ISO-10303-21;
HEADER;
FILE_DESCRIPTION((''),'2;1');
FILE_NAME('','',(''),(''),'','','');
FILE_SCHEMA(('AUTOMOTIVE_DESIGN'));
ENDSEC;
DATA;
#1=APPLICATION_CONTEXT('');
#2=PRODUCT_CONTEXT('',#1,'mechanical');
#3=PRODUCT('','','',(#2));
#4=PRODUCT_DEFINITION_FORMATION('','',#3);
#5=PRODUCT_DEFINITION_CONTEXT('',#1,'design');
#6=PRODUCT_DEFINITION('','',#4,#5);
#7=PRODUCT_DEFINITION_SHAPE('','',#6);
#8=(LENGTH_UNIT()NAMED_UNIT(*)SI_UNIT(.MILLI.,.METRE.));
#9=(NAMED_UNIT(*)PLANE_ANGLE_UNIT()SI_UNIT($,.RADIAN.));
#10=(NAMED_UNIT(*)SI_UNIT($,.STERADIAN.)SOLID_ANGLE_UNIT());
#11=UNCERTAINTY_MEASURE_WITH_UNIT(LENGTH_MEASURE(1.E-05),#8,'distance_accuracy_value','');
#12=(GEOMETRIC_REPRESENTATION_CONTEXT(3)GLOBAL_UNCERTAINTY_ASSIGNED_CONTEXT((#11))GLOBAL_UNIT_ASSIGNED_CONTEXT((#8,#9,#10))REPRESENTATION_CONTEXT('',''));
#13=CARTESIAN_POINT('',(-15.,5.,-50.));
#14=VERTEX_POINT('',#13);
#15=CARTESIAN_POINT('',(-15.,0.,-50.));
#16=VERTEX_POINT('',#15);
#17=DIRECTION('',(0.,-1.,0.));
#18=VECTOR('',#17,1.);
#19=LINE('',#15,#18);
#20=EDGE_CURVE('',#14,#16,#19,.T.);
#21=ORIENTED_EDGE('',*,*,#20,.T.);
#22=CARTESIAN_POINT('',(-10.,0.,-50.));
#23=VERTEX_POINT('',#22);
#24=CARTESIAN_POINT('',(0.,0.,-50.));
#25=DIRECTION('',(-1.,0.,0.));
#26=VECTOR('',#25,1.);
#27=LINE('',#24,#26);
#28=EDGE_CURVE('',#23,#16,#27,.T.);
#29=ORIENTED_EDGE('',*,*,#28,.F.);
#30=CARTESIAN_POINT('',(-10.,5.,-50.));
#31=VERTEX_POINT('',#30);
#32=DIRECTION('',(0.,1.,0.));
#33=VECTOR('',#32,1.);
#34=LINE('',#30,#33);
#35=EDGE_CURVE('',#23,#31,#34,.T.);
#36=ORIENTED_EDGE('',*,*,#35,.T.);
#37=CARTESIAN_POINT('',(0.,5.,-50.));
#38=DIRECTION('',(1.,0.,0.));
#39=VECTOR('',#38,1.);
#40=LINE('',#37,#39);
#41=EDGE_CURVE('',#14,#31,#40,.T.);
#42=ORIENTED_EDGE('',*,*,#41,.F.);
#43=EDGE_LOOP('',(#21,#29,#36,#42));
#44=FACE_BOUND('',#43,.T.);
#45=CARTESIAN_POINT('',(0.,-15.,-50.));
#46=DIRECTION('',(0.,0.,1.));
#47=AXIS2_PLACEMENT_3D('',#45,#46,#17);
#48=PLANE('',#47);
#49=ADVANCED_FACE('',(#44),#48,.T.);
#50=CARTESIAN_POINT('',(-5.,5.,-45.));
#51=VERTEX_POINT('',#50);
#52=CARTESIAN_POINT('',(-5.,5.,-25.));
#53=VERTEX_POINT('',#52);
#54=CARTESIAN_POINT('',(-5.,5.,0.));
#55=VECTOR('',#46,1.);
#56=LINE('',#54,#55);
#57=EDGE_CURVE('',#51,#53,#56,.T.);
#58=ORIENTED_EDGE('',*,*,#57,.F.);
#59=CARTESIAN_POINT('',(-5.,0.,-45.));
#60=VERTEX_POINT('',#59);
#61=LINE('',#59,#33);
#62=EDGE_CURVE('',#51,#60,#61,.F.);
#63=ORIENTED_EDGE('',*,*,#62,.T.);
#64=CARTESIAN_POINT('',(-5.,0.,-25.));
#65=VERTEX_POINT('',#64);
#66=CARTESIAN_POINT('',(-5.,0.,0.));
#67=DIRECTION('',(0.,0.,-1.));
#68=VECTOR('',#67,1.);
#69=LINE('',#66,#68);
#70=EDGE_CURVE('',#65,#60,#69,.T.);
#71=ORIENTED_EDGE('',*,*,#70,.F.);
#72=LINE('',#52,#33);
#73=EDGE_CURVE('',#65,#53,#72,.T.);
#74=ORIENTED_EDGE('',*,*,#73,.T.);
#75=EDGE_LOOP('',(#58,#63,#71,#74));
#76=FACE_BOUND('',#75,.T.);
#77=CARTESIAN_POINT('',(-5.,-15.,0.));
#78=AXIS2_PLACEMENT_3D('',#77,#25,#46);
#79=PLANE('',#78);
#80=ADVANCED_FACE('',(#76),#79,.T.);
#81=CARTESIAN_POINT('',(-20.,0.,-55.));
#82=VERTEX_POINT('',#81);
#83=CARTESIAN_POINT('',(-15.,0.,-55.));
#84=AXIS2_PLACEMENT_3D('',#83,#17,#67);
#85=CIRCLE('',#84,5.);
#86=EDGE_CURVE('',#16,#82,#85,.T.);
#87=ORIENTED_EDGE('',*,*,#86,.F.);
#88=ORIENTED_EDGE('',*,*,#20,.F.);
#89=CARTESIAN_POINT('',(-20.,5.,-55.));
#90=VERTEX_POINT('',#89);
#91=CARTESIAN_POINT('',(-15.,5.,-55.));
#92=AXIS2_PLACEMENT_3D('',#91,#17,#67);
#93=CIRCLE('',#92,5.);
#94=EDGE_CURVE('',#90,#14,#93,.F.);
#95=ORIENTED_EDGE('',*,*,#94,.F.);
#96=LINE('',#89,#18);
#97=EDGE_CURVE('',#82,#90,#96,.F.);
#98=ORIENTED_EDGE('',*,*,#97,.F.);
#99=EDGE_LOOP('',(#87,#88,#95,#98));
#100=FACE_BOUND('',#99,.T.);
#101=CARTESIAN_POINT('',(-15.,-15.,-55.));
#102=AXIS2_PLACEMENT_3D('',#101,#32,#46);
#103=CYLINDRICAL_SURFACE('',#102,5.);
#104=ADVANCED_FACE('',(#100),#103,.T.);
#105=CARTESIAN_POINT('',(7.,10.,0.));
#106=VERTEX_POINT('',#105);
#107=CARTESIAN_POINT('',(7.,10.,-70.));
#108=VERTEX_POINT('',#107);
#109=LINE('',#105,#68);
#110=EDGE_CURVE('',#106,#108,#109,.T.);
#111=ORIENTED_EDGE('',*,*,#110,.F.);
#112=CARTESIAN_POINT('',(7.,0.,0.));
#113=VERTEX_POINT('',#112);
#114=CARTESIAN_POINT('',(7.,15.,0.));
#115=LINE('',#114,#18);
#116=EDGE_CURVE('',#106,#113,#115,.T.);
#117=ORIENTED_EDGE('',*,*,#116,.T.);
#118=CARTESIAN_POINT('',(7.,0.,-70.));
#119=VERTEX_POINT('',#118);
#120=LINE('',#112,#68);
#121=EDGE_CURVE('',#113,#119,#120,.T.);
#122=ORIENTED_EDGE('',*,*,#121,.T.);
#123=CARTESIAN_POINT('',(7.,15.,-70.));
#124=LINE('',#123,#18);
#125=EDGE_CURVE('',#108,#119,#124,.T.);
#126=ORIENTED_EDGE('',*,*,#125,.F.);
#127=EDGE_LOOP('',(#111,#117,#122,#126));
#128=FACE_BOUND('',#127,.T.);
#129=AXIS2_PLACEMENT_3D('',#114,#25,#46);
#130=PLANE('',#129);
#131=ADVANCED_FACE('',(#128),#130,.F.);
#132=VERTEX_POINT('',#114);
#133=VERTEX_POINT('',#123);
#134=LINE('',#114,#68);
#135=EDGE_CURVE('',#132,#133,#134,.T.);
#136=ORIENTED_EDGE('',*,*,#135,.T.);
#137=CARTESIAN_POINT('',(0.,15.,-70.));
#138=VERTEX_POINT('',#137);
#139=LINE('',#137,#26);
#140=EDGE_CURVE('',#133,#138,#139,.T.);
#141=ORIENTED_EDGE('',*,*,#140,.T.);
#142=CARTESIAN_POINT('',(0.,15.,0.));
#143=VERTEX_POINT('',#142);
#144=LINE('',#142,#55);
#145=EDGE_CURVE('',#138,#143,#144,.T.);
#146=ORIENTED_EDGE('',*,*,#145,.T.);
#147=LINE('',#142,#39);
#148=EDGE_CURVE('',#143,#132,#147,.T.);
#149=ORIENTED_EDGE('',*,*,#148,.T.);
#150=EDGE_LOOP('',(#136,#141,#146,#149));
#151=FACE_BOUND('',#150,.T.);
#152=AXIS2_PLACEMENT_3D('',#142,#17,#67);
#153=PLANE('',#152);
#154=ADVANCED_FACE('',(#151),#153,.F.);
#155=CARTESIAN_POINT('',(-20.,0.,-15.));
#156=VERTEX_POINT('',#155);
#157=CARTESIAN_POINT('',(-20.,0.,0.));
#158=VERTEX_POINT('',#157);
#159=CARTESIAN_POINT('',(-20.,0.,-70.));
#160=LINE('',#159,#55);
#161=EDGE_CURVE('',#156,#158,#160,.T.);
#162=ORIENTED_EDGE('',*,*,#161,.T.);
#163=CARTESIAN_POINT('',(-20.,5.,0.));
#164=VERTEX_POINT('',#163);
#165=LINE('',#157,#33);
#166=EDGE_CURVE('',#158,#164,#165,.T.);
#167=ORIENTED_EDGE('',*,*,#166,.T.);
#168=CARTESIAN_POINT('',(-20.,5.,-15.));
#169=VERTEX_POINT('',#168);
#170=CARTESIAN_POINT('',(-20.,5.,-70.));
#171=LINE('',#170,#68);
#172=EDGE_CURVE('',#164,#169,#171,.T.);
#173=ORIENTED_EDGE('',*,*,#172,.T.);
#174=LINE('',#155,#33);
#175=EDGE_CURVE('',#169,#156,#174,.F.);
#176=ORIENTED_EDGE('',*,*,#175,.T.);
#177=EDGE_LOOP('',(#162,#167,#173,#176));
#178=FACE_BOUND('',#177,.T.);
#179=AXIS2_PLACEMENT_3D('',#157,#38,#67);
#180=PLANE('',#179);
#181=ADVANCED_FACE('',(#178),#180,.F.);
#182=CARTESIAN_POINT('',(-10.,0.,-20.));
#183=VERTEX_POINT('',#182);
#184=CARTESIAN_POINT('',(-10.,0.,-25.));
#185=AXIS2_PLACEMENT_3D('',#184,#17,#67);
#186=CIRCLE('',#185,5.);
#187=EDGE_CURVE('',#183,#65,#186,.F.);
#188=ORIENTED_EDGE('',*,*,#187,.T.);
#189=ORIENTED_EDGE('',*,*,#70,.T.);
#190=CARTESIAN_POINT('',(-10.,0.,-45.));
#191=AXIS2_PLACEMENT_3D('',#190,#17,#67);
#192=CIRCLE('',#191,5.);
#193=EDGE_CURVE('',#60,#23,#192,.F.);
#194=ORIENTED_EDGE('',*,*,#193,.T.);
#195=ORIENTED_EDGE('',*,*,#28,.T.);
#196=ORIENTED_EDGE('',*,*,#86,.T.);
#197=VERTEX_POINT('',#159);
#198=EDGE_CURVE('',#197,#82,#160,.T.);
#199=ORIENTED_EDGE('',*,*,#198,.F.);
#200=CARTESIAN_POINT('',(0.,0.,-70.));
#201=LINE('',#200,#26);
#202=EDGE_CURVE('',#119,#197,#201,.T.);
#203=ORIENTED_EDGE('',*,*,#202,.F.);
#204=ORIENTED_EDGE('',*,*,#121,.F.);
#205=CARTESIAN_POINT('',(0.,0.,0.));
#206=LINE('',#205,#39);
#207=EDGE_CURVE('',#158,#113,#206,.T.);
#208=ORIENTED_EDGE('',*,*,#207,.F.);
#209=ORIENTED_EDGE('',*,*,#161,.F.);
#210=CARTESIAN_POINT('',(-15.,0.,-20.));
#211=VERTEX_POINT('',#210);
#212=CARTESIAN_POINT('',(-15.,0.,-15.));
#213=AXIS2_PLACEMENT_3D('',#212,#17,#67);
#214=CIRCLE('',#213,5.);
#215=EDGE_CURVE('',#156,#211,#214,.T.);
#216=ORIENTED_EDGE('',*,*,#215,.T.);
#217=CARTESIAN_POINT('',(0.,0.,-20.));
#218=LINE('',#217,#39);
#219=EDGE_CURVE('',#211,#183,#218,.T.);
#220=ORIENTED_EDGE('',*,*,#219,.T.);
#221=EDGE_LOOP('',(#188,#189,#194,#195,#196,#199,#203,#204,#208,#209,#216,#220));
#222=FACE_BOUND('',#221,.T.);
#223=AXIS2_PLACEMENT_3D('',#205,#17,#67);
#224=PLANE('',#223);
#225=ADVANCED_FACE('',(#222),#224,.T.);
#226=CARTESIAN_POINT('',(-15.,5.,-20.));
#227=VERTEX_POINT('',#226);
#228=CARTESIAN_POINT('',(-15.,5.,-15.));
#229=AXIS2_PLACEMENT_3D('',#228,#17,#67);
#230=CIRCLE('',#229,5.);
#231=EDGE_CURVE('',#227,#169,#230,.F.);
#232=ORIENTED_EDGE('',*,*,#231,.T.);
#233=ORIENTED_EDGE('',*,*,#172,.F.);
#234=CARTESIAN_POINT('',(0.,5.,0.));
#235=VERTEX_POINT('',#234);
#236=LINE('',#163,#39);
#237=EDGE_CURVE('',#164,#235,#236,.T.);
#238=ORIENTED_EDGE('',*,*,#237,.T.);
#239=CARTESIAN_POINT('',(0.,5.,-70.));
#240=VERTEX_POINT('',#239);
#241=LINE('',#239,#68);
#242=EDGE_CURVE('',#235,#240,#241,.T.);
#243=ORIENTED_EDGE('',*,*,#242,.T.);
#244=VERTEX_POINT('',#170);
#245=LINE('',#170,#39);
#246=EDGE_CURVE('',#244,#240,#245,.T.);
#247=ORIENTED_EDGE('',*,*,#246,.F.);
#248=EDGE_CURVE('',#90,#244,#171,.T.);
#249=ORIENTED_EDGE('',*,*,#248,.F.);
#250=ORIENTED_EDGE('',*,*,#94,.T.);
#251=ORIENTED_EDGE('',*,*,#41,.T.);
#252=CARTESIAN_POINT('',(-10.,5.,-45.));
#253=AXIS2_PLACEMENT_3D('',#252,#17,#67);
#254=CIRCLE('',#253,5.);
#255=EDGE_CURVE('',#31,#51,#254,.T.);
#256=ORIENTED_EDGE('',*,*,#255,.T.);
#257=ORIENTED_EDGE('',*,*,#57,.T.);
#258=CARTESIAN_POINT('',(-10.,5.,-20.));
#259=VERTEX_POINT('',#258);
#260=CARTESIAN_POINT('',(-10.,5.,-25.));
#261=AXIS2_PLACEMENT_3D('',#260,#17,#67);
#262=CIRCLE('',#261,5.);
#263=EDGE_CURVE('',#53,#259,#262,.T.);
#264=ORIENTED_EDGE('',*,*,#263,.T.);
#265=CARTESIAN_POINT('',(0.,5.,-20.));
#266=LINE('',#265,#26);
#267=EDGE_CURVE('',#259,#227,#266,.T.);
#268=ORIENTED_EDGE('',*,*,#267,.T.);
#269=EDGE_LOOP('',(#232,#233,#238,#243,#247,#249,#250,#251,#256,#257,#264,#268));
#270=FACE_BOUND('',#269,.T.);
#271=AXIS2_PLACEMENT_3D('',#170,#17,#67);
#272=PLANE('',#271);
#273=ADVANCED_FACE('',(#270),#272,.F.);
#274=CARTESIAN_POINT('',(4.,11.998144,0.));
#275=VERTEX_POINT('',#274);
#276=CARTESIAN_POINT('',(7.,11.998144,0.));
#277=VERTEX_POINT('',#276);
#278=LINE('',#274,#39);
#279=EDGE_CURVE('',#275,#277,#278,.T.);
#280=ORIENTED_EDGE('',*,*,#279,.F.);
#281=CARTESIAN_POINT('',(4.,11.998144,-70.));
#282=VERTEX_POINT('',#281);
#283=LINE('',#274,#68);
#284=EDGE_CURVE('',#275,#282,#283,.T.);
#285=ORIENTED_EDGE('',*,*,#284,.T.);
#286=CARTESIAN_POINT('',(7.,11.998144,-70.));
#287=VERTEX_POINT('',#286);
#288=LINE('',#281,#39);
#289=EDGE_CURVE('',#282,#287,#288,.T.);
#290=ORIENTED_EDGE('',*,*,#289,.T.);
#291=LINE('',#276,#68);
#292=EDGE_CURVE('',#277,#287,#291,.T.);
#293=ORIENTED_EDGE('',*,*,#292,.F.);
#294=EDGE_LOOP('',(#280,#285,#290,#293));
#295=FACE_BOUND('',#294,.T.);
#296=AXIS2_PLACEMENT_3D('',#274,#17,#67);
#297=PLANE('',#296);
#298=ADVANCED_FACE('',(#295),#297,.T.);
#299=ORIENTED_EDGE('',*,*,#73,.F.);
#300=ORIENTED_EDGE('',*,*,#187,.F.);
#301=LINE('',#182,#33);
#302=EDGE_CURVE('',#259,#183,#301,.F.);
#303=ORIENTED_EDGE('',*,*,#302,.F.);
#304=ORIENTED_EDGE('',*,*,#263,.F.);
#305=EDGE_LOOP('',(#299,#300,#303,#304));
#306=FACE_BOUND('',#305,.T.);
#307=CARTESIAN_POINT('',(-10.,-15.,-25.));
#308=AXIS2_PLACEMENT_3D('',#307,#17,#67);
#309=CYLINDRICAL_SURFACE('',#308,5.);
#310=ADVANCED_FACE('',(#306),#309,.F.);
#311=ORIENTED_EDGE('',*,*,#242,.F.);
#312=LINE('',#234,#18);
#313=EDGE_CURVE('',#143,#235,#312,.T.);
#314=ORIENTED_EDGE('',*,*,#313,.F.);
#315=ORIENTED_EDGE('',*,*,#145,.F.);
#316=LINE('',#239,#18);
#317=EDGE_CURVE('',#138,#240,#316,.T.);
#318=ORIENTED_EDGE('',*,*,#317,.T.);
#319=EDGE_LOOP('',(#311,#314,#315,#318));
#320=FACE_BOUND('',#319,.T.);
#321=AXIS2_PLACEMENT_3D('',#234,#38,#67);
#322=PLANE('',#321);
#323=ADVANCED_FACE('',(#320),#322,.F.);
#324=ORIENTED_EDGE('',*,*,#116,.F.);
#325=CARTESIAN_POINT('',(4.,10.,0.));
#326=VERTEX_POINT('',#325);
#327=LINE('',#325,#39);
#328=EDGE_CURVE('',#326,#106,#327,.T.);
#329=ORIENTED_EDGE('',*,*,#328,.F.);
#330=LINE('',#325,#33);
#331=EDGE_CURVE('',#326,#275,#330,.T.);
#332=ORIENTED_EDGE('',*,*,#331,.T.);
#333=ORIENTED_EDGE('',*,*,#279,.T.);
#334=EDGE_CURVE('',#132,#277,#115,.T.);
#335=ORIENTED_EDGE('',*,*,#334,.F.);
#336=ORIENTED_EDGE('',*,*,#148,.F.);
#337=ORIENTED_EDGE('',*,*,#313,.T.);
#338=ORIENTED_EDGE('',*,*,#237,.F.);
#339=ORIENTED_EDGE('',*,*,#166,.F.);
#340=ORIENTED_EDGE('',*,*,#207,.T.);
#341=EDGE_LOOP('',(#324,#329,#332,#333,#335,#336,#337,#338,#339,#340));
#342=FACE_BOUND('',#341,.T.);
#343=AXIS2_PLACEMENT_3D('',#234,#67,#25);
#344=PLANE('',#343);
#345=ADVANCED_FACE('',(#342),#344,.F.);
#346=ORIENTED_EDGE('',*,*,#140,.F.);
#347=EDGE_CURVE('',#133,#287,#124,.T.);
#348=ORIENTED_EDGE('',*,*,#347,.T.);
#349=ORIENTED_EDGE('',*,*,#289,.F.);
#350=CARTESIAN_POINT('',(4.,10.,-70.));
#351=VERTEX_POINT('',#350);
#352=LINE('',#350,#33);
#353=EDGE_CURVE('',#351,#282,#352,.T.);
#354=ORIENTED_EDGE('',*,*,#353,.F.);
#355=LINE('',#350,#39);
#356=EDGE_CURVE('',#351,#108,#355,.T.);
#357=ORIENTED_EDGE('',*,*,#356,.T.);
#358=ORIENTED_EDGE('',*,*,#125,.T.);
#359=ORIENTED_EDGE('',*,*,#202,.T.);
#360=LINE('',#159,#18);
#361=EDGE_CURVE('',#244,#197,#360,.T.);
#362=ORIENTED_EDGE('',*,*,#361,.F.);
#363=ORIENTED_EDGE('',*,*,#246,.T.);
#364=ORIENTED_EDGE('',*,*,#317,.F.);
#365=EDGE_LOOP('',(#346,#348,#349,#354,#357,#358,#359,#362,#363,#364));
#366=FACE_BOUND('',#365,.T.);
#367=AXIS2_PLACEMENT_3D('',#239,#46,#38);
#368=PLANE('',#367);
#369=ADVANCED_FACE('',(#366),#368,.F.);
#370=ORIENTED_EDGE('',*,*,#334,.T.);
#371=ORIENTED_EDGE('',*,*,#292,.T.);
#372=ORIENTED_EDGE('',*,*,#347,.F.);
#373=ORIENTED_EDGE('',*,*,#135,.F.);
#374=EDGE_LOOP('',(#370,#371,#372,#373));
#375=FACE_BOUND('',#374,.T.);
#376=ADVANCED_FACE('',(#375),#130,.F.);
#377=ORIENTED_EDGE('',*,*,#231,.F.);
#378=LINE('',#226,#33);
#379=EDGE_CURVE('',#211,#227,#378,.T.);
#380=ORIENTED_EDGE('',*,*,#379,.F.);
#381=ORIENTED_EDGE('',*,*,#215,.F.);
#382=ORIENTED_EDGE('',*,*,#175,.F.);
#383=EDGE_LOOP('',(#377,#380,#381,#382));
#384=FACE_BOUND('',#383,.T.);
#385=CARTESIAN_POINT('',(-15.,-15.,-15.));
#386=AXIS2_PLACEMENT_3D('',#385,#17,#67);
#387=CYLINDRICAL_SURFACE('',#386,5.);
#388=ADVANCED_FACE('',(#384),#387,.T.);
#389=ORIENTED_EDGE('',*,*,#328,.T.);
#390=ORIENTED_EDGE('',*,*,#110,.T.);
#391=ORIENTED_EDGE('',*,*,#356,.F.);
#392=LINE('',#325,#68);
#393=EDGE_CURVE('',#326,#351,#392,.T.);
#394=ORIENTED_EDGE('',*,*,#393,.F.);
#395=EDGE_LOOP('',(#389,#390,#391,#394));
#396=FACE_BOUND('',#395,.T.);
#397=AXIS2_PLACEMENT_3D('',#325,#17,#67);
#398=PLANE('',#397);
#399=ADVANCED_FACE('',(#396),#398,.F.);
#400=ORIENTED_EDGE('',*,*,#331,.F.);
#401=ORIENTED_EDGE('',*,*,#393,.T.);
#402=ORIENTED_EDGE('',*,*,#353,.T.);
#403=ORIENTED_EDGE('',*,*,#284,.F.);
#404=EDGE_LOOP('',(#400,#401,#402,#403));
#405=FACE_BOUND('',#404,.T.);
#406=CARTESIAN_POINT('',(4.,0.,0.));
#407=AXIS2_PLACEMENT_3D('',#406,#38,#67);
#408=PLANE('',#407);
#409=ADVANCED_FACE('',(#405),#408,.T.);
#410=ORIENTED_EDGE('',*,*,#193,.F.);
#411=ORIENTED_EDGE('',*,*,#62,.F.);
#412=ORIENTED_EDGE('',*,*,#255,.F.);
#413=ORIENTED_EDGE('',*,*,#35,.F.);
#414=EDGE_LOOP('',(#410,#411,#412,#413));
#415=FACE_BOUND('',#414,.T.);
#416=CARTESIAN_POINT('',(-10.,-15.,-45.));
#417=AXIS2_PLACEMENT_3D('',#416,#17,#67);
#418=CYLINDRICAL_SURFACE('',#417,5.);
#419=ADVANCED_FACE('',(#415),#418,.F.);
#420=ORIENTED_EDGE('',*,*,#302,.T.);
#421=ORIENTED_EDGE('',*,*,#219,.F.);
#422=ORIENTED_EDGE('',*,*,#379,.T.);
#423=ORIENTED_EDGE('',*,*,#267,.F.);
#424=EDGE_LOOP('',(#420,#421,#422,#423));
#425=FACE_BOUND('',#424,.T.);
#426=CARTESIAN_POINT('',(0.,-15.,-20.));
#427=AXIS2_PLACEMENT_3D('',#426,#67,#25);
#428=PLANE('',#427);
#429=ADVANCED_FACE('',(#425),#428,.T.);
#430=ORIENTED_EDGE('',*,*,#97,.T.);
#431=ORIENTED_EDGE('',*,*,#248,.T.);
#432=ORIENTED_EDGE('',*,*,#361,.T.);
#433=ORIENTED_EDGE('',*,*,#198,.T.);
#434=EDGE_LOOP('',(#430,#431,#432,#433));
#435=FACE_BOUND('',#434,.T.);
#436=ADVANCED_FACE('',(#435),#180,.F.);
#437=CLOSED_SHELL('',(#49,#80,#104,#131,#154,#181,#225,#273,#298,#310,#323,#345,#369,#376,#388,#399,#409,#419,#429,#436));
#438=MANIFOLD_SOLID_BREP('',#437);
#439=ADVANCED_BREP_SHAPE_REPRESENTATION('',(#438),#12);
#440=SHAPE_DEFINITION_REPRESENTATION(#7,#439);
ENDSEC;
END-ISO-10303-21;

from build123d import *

# Parameters (mm, degrees)
SKETCH4_W           = 20
SKETCH4_H           = 70
BOSS_EXTRUDE2_DEPTH = 5
SKETCH5_W           = 7
SKETCH5_H           = 70
BOSS_EXTRUDE3_DEPTH = 10
SKETCH6_W           = 70
SKETCH6_H           = 1.998143523
CUT_EXTRUDE1_DEPTH  = 3
SKETCH8_W           = 10
SKETCH8_H           = 30
CUT_EXTRUDE2_DEPTH  = 74.484692283
FILLET3_START       = -1
FILLET3_DEPTH       = 6
FILLET3_2_DEPTH     = 5
FILLET4_R           = 5
SKETCH10_W          = 13.639904779
SKETCH10_H          = 5
CUT_EXTRUDE3_DEPTH  = 75.330343737
SKETCH11_W          = 70
SKETCH11_H          = 5
BOSS_EXTRUDE4_DEPTH = 20
SKETCH13_W          = 15
SKETCH13_H          = 30
CUT_EXTRUDE4_DEPTH  = 20
FILLET6_R           = 5


with BuildPart() as part:
    # Sketch4 → Boss-Extrude2 (new body)
    with BuildSketch(Plane(origin=(0, 0, 0), x_dir=(1, 0, 0), z_dir=(0, 1, 0))):
        with Locations((10, 35)):
            Rectangle(SKETCH4_W, SKETCH4_H)
    extrude(amount=BOSS_EXTRUDE2_DEPTH)

    # Sketch5 → Boss-Extrude3 (add)
    with BuildSketch(Plane(origin=(0, 5, 0), x_dir=(1, 0, 0), z_dir=(0, 1, 0))):
        with Locations((3.5, 35)):
            Rectangle(SKETCH5_W, SKETCH5_H)
    extrude(amount=BOSS_EXTRUDE3_DEPTH)

    # Sketch6 → Cut-Extrude1 (cut)
    with BuildSketch(Plane(origin=(7, 0, 0), x_dir=(0, 0, -1), z_dir=(1, 0, 0))):
        with Locations((35, 10.999071762)):
            Rectangle(SKETCH6_W, SKETCH6_H)
    extrude(amount=-CUT_EXTRUDE1_DEPTH, mode=Mode.SUBTRACT)

    # Sketch8 → Cut-Extrude2 (cut, through all)
    with BuildSketch(Plane(origin=(0, 5, 0), x_dir=(1, 0, 0), z_dir=(0, 1, 0))):
        with Locations((15, 35)):
            Rectangle(SKETCH8_W, SKETCH8_H)
    extrude(amount=-CUT_EXTRUDE2_DEPTH, mode=Mode.SUBTRACT)

    # Fillet3: read off the stored shape, not the designer's step
    # Fillet3 outline → Fillet3 (cut)
    with BuildSketch(Plane(origin=(0, 0, 0), x_dir=(1, 0, 0), z_dir=(0, 1, 0)).offset(FILLET3_START)):
        with BuildLine():
            Line((20, 50), (20, 55))
            ThreePointArc((20, 55), (18.535533906, 51.464466094), (15, 50))
            Line((15, 50), (20, 50))
        make_face()
        with BuildLine():
            Line((20, 20), (15, 20))
            ThreePointArc((15, 20), (18.535533906, 18.535533906), (20, 15))
            Line((20, 15), (20, 20))
        make_face()
    extrude(amount=FILLET3_DEPTH, mode=Mode.SUBTRACT)

    # Fillet3 2 outline → Fillet3 2 (add)
    with BuildSketch(Plane(origin=(0, 0, 0), x_dir=(1, 0, 0), z_dir=(0, 1, 0))):
        with BuildLine():
            ThreePointArc((15, 20), (11.464466094, 21.464466094), (10, 25))
            Line((10, 25), (10, 20))
            Line((10, 20), (15, 20))
        make_face()
        with BuildLine():
            ThreePointArc((10, 45), (11.464466094, 48.535533906), (15, 50))
            Line((15, 50), (10, 50))
            Line((10, 50), (10, 45))
        make_face()
    extrude(amount=FILLET3_2_DEPTH)

    # Fillet4
    fillet4_edges = [part.edges().sort_by_distance(p)[0] for p in [
        (20, 2.5, -70),
        (20, 2.5, 0),
    ]]
    fillet(fillet4_edges, radius=FILLET4_R)

    # Sketch10 → Cut-Extrude3 (cut, through all)
    with BuildSketch(Plane(origin=(0, 0, -70), x_dir=(-1, 0, 0), z_dir=(0, 0, -1))):
        with Locations((-13.81995239, 2.5)):
            Rectangle(SKETCH10_W, SKETCH10_H)
    extrude(amount=-CUT_EXTRUDE3_DEPTH, mode=Mode.SUBTRACT)

    # Sketch11 → Boss-Extrude4 (add)
    with BuildSketch(Plane.ZY):
        with Locations((-35, 2.5)):
            Rectangle(SKETCH11_W, SKETCH11_H)
    extrude(amount=BOSS_EXTRUDE4_DEPTH)

    # Sketch13 → Cut-Extrude4 (cut)
    with BuildSketch(Plane(origin=(0, 5, 0), x_dir=(1, 0, 0), z_dir=(0, 1, 0))):
        with Locations((-12.5, 35)):
            Rectangle(SKETCH13_W, SKETCH13_H)
    extrude(amount=-CUT_EXTRUDE4_DEPTH, mode=Mode.SUBTRACT)

    # Fillet6
    fillet6_edges = [part.edges().sort_by_distance(p)[0] for p in [
        (-20, 2.5, -50),
        (-20, 2.5, -20),
        (-5, 2.5, -20),
        (-5, 2.5, -50),
    ]]
    fillet(fillet6_edges, radius=FILLET6_R)


solid = part.part
